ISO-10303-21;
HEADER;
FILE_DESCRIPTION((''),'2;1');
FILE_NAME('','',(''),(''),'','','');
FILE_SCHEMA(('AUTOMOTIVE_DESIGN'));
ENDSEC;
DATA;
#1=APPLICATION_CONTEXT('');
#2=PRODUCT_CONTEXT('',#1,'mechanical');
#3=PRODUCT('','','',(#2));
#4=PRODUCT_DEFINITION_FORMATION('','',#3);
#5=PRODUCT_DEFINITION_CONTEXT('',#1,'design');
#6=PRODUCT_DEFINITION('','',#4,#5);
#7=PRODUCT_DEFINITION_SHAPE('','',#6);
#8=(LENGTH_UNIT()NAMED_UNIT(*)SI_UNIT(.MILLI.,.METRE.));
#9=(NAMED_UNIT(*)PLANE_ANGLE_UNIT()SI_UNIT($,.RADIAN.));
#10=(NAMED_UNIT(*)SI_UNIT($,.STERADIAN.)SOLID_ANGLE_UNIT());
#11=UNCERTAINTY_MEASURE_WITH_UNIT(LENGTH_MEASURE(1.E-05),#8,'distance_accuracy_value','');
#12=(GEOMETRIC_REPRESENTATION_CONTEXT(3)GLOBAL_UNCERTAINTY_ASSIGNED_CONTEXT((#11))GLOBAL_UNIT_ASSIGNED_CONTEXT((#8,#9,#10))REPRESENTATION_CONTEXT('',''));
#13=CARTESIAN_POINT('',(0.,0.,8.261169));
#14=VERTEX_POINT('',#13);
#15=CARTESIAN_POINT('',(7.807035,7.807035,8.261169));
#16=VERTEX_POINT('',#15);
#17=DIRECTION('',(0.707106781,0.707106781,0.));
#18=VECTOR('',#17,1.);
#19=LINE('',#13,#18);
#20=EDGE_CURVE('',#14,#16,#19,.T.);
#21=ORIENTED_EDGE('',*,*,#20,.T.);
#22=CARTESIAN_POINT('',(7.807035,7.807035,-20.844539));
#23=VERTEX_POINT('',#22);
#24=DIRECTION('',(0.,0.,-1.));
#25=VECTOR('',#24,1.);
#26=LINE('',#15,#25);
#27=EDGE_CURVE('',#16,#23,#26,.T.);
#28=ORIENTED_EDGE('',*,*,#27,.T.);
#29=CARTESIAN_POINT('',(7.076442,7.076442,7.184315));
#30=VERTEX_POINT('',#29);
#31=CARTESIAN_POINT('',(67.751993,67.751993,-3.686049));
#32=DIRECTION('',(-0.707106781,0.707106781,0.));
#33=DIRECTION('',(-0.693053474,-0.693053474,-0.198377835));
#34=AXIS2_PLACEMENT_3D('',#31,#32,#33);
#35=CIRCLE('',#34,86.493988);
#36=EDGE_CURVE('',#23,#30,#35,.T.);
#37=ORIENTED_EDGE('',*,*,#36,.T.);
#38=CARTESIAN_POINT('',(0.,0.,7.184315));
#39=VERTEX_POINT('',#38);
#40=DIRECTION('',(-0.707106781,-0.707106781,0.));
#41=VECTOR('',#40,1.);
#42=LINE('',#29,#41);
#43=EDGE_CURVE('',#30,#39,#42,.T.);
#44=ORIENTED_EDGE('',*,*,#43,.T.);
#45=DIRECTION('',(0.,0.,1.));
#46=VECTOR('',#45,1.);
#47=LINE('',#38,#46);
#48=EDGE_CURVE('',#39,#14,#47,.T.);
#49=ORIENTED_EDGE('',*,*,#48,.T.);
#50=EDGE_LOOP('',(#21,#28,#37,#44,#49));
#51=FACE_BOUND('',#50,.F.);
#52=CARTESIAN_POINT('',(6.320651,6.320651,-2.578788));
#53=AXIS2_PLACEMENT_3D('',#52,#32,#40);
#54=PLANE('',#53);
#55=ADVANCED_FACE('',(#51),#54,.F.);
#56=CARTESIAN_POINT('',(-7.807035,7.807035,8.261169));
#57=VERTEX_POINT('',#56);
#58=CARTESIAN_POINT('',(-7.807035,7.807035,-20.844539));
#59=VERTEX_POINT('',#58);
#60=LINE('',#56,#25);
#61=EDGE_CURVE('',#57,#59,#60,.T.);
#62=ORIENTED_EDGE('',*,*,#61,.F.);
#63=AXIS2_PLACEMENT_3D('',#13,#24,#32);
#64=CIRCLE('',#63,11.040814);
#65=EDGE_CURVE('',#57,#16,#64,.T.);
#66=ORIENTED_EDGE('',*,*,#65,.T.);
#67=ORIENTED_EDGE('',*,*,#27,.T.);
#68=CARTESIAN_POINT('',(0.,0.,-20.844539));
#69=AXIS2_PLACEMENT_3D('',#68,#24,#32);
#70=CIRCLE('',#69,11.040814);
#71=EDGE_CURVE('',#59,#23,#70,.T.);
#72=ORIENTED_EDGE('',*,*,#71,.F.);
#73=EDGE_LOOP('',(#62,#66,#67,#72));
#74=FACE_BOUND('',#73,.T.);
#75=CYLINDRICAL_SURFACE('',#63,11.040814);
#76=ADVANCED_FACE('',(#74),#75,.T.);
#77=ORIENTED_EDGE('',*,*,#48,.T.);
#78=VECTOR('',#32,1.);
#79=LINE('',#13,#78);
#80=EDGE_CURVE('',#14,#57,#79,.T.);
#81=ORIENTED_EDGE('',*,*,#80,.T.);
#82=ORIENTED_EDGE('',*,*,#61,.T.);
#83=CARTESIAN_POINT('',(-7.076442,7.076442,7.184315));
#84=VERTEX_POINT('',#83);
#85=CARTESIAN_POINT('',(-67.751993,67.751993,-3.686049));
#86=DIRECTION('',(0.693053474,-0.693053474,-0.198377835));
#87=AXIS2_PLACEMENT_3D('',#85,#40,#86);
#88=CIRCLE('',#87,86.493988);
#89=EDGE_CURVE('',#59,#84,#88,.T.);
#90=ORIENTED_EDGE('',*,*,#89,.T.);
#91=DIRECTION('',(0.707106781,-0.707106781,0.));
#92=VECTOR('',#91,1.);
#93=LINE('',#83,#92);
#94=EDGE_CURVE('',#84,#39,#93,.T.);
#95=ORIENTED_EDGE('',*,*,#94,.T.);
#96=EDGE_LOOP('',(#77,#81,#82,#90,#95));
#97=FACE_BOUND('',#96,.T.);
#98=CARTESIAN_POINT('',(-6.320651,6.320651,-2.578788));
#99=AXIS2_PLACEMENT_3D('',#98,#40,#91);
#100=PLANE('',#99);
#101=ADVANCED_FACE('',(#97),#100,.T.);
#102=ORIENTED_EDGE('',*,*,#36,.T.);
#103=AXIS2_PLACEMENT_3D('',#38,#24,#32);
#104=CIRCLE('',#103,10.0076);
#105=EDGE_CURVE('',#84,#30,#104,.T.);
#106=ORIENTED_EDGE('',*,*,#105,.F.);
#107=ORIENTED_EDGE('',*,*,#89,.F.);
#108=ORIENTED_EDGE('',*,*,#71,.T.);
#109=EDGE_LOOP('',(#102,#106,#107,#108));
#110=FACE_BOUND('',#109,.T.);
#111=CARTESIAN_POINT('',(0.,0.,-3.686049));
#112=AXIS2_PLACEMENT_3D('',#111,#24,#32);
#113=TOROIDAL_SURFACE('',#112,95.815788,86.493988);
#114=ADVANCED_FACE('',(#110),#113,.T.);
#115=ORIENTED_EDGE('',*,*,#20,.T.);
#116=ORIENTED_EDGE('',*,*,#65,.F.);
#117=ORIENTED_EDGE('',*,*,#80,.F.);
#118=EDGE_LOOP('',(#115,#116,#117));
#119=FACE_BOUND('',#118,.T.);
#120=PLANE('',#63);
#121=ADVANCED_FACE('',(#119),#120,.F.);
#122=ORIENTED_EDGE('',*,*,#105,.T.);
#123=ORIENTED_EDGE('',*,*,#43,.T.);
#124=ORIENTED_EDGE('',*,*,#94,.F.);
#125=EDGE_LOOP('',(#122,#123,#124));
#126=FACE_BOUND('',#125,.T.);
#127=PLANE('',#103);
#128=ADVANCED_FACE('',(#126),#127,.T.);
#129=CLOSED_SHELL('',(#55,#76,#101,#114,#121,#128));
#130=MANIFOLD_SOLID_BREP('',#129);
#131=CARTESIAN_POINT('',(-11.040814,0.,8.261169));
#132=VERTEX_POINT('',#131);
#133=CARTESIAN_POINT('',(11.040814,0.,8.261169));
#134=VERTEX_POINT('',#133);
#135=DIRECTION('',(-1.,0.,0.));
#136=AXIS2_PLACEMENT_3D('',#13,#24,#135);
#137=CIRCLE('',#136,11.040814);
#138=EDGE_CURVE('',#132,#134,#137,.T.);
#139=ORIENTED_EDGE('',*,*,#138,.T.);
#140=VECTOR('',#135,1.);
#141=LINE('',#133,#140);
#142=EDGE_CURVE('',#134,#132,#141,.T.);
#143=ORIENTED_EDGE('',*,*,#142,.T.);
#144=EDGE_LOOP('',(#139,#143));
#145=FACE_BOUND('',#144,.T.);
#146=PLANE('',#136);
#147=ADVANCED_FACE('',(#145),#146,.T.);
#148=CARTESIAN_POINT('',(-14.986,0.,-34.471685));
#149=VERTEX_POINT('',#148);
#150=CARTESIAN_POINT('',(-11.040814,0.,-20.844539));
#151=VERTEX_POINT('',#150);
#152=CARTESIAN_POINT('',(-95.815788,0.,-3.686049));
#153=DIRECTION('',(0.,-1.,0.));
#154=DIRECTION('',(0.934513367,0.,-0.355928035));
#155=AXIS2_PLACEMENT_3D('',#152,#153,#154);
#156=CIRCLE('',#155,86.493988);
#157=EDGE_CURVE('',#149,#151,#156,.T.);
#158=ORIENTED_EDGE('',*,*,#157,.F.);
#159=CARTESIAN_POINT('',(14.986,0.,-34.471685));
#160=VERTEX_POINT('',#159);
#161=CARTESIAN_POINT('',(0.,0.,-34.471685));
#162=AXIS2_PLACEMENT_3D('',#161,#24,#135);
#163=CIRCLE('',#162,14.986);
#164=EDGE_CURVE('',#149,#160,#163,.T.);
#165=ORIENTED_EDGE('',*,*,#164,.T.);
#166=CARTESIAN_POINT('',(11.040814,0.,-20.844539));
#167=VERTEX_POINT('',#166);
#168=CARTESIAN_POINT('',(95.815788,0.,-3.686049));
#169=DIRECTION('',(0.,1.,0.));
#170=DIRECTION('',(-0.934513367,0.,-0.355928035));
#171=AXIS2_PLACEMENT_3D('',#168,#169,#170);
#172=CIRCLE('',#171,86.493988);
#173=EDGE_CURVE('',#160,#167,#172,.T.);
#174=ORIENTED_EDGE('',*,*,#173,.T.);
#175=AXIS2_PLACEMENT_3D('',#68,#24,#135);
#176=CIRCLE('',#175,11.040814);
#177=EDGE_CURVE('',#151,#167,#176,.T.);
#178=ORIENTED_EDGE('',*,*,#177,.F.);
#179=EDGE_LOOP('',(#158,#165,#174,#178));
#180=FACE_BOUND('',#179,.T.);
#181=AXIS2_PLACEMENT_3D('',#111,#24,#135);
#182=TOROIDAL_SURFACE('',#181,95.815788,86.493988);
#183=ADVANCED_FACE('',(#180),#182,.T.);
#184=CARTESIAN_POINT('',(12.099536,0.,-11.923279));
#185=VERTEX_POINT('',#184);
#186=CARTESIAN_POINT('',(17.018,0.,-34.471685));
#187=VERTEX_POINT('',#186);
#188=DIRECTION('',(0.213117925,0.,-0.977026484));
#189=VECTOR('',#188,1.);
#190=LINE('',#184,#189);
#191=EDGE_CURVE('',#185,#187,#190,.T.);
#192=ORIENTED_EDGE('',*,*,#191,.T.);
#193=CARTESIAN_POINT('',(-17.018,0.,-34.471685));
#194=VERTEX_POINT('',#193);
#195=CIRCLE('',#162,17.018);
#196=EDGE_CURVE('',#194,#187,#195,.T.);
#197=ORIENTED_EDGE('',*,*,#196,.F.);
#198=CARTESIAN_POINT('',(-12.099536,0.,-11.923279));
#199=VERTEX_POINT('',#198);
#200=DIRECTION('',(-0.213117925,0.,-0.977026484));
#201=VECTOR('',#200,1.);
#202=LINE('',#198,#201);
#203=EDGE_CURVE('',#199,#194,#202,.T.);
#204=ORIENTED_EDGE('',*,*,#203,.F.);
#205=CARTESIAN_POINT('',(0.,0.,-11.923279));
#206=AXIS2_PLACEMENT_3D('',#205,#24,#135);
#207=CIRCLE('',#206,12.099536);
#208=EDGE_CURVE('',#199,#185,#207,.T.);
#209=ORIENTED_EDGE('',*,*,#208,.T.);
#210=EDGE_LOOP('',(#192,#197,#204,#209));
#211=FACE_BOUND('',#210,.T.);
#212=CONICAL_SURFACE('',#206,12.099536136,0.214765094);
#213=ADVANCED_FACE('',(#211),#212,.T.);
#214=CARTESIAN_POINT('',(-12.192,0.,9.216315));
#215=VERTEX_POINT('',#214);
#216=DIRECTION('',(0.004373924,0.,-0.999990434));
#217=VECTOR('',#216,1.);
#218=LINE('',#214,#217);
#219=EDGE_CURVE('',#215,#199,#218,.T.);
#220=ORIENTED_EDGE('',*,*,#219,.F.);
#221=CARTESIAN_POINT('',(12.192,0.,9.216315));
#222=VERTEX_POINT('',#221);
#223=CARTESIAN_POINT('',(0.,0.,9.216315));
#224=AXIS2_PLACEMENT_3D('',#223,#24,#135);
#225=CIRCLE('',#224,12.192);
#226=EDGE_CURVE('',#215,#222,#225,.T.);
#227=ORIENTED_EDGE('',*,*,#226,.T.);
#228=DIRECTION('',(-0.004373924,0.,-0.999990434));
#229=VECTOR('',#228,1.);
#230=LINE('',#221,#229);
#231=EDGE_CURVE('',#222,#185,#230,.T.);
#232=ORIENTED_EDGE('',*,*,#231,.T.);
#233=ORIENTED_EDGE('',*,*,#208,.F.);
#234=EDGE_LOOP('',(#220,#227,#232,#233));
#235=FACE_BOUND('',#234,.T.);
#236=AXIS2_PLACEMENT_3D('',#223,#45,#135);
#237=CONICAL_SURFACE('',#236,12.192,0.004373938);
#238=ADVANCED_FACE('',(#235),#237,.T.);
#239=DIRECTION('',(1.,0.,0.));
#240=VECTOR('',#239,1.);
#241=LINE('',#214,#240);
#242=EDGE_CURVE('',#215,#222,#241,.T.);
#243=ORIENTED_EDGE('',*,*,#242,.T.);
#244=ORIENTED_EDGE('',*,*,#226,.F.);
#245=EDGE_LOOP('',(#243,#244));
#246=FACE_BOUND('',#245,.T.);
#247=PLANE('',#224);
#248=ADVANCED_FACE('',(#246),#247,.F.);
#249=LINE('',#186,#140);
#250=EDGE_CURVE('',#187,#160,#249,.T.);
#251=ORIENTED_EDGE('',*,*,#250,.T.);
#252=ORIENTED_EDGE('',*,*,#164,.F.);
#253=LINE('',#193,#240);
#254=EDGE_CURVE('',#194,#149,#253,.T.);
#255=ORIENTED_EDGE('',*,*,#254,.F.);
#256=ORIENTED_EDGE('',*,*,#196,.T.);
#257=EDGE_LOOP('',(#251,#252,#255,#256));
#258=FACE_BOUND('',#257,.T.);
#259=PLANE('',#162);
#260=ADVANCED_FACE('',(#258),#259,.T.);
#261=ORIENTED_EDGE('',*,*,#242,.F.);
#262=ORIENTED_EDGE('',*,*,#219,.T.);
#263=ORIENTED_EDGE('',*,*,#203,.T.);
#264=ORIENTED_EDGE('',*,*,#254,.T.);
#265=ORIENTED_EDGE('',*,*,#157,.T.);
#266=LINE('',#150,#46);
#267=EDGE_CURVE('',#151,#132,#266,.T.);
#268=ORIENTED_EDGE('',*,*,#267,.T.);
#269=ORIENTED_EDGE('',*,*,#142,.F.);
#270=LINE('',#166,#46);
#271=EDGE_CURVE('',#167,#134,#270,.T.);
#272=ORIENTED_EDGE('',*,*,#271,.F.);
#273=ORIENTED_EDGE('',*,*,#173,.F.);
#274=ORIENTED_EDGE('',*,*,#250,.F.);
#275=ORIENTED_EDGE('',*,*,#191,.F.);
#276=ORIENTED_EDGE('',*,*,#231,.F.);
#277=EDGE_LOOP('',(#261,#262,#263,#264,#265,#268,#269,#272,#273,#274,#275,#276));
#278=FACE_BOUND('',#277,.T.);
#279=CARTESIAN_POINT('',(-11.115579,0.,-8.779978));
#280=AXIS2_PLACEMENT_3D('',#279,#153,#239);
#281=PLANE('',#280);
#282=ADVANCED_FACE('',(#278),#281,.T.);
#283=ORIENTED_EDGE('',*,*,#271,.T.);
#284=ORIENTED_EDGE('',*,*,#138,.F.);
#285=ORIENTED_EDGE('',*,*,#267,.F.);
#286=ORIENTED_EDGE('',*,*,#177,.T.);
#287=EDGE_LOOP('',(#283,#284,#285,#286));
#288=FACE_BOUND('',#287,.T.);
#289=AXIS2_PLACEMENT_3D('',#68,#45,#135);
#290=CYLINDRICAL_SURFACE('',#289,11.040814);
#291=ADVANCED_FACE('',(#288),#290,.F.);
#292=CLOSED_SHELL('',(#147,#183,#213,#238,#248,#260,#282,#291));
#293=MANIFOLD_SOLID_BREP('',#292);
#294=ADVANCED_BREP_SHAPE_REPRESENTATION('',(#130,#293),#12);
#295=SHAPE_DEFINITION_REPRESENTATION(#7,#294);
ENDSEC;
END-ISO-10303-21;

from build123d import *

# Parameters (mm, degrees)
F1_ANGLE       = 180
F2_ANGLE_START = 45
F2_ANGLE       = 90


# Not quite as in the source:
# - a feature names something its author has since deleted; it is built from what else it names


with BuildPart() as f1:
    # F0 (on Front) → F1 (revolve)
    with BuildSketch(Plane.XZ):
        with BuildLine():
            Line((0, 8.2611693069), (0, 9.2163154948))
            Line((0, 9.2163154948), (-5.092757754, 9.2163154948))
            Line((-5.092757754, 9.2163154948), (-12.192, 9.2163154948))
            Line((-12.192, 9.2163154948), (-12.0995361358, -11.9232786819))
            Line((-12.0995361358, -11.9232786819), (-17.018, -34.4716845052))
            Line((-17.018, -34.4716845052), (-14.986, -34.4716845052))
            ThreePointArc((-14.986, -34.4716845052), (-12.733545301, -27.7391345646), (-11.0408142209, -20.8445394087))
            Line((-11.0408142209, -20.8445394087), (-11.0408142209, 7.1843154948))
            Line((-11.0408142209, 7.1843154948), (-11.0408142209, 8.2611693069))
            Line((-11.0408142209, 8.2611693069), (0, 8.2611693069))
        make_face()
    revolve(axis=Axis((0, 0, 8.2003154948), (0, 0, -1)), revolution_arc=F1_ANGLE)


with BuildPart() as f2:
    # F0 (on Front) → F2 (revolve)
    with BuildSketch(Plane.XZ, mode=Mode.PRIVATE) as f2_sk:
        with BuildLine():
            Line((0, 7.1843154948), (0, 8.2611693069))
            Line((0, 8.2611693069), (-11.0408142209, 8.2611693069))
            Line((-11.0408142209, 8.2611693069), (-11.0408142209, 7.1843154948))
            Line((-11.0408142209, 7.1843154948), (-11.0408142209, -20.8445394087))
            ThreePointArc((-11.0408142209, -20.8445394087), (-9.3805061549, -6.8722716562), (-10.0076, 7.1843154948))
            Line((-10.0076, 7.1843154948), (0, 7.1843154948))
        make_face()
    revolve(f2_sk.sketch.rotate(Axis((0, 0, 8.2003154948), (0, 0, -1)), F2_ANGLE_START), axis=Axis((0, 0, 8.2003154948), (0, 0, -1)), revolution_arc=F2_ANGLE)


solid = Compound([f1.part, f2.part])
